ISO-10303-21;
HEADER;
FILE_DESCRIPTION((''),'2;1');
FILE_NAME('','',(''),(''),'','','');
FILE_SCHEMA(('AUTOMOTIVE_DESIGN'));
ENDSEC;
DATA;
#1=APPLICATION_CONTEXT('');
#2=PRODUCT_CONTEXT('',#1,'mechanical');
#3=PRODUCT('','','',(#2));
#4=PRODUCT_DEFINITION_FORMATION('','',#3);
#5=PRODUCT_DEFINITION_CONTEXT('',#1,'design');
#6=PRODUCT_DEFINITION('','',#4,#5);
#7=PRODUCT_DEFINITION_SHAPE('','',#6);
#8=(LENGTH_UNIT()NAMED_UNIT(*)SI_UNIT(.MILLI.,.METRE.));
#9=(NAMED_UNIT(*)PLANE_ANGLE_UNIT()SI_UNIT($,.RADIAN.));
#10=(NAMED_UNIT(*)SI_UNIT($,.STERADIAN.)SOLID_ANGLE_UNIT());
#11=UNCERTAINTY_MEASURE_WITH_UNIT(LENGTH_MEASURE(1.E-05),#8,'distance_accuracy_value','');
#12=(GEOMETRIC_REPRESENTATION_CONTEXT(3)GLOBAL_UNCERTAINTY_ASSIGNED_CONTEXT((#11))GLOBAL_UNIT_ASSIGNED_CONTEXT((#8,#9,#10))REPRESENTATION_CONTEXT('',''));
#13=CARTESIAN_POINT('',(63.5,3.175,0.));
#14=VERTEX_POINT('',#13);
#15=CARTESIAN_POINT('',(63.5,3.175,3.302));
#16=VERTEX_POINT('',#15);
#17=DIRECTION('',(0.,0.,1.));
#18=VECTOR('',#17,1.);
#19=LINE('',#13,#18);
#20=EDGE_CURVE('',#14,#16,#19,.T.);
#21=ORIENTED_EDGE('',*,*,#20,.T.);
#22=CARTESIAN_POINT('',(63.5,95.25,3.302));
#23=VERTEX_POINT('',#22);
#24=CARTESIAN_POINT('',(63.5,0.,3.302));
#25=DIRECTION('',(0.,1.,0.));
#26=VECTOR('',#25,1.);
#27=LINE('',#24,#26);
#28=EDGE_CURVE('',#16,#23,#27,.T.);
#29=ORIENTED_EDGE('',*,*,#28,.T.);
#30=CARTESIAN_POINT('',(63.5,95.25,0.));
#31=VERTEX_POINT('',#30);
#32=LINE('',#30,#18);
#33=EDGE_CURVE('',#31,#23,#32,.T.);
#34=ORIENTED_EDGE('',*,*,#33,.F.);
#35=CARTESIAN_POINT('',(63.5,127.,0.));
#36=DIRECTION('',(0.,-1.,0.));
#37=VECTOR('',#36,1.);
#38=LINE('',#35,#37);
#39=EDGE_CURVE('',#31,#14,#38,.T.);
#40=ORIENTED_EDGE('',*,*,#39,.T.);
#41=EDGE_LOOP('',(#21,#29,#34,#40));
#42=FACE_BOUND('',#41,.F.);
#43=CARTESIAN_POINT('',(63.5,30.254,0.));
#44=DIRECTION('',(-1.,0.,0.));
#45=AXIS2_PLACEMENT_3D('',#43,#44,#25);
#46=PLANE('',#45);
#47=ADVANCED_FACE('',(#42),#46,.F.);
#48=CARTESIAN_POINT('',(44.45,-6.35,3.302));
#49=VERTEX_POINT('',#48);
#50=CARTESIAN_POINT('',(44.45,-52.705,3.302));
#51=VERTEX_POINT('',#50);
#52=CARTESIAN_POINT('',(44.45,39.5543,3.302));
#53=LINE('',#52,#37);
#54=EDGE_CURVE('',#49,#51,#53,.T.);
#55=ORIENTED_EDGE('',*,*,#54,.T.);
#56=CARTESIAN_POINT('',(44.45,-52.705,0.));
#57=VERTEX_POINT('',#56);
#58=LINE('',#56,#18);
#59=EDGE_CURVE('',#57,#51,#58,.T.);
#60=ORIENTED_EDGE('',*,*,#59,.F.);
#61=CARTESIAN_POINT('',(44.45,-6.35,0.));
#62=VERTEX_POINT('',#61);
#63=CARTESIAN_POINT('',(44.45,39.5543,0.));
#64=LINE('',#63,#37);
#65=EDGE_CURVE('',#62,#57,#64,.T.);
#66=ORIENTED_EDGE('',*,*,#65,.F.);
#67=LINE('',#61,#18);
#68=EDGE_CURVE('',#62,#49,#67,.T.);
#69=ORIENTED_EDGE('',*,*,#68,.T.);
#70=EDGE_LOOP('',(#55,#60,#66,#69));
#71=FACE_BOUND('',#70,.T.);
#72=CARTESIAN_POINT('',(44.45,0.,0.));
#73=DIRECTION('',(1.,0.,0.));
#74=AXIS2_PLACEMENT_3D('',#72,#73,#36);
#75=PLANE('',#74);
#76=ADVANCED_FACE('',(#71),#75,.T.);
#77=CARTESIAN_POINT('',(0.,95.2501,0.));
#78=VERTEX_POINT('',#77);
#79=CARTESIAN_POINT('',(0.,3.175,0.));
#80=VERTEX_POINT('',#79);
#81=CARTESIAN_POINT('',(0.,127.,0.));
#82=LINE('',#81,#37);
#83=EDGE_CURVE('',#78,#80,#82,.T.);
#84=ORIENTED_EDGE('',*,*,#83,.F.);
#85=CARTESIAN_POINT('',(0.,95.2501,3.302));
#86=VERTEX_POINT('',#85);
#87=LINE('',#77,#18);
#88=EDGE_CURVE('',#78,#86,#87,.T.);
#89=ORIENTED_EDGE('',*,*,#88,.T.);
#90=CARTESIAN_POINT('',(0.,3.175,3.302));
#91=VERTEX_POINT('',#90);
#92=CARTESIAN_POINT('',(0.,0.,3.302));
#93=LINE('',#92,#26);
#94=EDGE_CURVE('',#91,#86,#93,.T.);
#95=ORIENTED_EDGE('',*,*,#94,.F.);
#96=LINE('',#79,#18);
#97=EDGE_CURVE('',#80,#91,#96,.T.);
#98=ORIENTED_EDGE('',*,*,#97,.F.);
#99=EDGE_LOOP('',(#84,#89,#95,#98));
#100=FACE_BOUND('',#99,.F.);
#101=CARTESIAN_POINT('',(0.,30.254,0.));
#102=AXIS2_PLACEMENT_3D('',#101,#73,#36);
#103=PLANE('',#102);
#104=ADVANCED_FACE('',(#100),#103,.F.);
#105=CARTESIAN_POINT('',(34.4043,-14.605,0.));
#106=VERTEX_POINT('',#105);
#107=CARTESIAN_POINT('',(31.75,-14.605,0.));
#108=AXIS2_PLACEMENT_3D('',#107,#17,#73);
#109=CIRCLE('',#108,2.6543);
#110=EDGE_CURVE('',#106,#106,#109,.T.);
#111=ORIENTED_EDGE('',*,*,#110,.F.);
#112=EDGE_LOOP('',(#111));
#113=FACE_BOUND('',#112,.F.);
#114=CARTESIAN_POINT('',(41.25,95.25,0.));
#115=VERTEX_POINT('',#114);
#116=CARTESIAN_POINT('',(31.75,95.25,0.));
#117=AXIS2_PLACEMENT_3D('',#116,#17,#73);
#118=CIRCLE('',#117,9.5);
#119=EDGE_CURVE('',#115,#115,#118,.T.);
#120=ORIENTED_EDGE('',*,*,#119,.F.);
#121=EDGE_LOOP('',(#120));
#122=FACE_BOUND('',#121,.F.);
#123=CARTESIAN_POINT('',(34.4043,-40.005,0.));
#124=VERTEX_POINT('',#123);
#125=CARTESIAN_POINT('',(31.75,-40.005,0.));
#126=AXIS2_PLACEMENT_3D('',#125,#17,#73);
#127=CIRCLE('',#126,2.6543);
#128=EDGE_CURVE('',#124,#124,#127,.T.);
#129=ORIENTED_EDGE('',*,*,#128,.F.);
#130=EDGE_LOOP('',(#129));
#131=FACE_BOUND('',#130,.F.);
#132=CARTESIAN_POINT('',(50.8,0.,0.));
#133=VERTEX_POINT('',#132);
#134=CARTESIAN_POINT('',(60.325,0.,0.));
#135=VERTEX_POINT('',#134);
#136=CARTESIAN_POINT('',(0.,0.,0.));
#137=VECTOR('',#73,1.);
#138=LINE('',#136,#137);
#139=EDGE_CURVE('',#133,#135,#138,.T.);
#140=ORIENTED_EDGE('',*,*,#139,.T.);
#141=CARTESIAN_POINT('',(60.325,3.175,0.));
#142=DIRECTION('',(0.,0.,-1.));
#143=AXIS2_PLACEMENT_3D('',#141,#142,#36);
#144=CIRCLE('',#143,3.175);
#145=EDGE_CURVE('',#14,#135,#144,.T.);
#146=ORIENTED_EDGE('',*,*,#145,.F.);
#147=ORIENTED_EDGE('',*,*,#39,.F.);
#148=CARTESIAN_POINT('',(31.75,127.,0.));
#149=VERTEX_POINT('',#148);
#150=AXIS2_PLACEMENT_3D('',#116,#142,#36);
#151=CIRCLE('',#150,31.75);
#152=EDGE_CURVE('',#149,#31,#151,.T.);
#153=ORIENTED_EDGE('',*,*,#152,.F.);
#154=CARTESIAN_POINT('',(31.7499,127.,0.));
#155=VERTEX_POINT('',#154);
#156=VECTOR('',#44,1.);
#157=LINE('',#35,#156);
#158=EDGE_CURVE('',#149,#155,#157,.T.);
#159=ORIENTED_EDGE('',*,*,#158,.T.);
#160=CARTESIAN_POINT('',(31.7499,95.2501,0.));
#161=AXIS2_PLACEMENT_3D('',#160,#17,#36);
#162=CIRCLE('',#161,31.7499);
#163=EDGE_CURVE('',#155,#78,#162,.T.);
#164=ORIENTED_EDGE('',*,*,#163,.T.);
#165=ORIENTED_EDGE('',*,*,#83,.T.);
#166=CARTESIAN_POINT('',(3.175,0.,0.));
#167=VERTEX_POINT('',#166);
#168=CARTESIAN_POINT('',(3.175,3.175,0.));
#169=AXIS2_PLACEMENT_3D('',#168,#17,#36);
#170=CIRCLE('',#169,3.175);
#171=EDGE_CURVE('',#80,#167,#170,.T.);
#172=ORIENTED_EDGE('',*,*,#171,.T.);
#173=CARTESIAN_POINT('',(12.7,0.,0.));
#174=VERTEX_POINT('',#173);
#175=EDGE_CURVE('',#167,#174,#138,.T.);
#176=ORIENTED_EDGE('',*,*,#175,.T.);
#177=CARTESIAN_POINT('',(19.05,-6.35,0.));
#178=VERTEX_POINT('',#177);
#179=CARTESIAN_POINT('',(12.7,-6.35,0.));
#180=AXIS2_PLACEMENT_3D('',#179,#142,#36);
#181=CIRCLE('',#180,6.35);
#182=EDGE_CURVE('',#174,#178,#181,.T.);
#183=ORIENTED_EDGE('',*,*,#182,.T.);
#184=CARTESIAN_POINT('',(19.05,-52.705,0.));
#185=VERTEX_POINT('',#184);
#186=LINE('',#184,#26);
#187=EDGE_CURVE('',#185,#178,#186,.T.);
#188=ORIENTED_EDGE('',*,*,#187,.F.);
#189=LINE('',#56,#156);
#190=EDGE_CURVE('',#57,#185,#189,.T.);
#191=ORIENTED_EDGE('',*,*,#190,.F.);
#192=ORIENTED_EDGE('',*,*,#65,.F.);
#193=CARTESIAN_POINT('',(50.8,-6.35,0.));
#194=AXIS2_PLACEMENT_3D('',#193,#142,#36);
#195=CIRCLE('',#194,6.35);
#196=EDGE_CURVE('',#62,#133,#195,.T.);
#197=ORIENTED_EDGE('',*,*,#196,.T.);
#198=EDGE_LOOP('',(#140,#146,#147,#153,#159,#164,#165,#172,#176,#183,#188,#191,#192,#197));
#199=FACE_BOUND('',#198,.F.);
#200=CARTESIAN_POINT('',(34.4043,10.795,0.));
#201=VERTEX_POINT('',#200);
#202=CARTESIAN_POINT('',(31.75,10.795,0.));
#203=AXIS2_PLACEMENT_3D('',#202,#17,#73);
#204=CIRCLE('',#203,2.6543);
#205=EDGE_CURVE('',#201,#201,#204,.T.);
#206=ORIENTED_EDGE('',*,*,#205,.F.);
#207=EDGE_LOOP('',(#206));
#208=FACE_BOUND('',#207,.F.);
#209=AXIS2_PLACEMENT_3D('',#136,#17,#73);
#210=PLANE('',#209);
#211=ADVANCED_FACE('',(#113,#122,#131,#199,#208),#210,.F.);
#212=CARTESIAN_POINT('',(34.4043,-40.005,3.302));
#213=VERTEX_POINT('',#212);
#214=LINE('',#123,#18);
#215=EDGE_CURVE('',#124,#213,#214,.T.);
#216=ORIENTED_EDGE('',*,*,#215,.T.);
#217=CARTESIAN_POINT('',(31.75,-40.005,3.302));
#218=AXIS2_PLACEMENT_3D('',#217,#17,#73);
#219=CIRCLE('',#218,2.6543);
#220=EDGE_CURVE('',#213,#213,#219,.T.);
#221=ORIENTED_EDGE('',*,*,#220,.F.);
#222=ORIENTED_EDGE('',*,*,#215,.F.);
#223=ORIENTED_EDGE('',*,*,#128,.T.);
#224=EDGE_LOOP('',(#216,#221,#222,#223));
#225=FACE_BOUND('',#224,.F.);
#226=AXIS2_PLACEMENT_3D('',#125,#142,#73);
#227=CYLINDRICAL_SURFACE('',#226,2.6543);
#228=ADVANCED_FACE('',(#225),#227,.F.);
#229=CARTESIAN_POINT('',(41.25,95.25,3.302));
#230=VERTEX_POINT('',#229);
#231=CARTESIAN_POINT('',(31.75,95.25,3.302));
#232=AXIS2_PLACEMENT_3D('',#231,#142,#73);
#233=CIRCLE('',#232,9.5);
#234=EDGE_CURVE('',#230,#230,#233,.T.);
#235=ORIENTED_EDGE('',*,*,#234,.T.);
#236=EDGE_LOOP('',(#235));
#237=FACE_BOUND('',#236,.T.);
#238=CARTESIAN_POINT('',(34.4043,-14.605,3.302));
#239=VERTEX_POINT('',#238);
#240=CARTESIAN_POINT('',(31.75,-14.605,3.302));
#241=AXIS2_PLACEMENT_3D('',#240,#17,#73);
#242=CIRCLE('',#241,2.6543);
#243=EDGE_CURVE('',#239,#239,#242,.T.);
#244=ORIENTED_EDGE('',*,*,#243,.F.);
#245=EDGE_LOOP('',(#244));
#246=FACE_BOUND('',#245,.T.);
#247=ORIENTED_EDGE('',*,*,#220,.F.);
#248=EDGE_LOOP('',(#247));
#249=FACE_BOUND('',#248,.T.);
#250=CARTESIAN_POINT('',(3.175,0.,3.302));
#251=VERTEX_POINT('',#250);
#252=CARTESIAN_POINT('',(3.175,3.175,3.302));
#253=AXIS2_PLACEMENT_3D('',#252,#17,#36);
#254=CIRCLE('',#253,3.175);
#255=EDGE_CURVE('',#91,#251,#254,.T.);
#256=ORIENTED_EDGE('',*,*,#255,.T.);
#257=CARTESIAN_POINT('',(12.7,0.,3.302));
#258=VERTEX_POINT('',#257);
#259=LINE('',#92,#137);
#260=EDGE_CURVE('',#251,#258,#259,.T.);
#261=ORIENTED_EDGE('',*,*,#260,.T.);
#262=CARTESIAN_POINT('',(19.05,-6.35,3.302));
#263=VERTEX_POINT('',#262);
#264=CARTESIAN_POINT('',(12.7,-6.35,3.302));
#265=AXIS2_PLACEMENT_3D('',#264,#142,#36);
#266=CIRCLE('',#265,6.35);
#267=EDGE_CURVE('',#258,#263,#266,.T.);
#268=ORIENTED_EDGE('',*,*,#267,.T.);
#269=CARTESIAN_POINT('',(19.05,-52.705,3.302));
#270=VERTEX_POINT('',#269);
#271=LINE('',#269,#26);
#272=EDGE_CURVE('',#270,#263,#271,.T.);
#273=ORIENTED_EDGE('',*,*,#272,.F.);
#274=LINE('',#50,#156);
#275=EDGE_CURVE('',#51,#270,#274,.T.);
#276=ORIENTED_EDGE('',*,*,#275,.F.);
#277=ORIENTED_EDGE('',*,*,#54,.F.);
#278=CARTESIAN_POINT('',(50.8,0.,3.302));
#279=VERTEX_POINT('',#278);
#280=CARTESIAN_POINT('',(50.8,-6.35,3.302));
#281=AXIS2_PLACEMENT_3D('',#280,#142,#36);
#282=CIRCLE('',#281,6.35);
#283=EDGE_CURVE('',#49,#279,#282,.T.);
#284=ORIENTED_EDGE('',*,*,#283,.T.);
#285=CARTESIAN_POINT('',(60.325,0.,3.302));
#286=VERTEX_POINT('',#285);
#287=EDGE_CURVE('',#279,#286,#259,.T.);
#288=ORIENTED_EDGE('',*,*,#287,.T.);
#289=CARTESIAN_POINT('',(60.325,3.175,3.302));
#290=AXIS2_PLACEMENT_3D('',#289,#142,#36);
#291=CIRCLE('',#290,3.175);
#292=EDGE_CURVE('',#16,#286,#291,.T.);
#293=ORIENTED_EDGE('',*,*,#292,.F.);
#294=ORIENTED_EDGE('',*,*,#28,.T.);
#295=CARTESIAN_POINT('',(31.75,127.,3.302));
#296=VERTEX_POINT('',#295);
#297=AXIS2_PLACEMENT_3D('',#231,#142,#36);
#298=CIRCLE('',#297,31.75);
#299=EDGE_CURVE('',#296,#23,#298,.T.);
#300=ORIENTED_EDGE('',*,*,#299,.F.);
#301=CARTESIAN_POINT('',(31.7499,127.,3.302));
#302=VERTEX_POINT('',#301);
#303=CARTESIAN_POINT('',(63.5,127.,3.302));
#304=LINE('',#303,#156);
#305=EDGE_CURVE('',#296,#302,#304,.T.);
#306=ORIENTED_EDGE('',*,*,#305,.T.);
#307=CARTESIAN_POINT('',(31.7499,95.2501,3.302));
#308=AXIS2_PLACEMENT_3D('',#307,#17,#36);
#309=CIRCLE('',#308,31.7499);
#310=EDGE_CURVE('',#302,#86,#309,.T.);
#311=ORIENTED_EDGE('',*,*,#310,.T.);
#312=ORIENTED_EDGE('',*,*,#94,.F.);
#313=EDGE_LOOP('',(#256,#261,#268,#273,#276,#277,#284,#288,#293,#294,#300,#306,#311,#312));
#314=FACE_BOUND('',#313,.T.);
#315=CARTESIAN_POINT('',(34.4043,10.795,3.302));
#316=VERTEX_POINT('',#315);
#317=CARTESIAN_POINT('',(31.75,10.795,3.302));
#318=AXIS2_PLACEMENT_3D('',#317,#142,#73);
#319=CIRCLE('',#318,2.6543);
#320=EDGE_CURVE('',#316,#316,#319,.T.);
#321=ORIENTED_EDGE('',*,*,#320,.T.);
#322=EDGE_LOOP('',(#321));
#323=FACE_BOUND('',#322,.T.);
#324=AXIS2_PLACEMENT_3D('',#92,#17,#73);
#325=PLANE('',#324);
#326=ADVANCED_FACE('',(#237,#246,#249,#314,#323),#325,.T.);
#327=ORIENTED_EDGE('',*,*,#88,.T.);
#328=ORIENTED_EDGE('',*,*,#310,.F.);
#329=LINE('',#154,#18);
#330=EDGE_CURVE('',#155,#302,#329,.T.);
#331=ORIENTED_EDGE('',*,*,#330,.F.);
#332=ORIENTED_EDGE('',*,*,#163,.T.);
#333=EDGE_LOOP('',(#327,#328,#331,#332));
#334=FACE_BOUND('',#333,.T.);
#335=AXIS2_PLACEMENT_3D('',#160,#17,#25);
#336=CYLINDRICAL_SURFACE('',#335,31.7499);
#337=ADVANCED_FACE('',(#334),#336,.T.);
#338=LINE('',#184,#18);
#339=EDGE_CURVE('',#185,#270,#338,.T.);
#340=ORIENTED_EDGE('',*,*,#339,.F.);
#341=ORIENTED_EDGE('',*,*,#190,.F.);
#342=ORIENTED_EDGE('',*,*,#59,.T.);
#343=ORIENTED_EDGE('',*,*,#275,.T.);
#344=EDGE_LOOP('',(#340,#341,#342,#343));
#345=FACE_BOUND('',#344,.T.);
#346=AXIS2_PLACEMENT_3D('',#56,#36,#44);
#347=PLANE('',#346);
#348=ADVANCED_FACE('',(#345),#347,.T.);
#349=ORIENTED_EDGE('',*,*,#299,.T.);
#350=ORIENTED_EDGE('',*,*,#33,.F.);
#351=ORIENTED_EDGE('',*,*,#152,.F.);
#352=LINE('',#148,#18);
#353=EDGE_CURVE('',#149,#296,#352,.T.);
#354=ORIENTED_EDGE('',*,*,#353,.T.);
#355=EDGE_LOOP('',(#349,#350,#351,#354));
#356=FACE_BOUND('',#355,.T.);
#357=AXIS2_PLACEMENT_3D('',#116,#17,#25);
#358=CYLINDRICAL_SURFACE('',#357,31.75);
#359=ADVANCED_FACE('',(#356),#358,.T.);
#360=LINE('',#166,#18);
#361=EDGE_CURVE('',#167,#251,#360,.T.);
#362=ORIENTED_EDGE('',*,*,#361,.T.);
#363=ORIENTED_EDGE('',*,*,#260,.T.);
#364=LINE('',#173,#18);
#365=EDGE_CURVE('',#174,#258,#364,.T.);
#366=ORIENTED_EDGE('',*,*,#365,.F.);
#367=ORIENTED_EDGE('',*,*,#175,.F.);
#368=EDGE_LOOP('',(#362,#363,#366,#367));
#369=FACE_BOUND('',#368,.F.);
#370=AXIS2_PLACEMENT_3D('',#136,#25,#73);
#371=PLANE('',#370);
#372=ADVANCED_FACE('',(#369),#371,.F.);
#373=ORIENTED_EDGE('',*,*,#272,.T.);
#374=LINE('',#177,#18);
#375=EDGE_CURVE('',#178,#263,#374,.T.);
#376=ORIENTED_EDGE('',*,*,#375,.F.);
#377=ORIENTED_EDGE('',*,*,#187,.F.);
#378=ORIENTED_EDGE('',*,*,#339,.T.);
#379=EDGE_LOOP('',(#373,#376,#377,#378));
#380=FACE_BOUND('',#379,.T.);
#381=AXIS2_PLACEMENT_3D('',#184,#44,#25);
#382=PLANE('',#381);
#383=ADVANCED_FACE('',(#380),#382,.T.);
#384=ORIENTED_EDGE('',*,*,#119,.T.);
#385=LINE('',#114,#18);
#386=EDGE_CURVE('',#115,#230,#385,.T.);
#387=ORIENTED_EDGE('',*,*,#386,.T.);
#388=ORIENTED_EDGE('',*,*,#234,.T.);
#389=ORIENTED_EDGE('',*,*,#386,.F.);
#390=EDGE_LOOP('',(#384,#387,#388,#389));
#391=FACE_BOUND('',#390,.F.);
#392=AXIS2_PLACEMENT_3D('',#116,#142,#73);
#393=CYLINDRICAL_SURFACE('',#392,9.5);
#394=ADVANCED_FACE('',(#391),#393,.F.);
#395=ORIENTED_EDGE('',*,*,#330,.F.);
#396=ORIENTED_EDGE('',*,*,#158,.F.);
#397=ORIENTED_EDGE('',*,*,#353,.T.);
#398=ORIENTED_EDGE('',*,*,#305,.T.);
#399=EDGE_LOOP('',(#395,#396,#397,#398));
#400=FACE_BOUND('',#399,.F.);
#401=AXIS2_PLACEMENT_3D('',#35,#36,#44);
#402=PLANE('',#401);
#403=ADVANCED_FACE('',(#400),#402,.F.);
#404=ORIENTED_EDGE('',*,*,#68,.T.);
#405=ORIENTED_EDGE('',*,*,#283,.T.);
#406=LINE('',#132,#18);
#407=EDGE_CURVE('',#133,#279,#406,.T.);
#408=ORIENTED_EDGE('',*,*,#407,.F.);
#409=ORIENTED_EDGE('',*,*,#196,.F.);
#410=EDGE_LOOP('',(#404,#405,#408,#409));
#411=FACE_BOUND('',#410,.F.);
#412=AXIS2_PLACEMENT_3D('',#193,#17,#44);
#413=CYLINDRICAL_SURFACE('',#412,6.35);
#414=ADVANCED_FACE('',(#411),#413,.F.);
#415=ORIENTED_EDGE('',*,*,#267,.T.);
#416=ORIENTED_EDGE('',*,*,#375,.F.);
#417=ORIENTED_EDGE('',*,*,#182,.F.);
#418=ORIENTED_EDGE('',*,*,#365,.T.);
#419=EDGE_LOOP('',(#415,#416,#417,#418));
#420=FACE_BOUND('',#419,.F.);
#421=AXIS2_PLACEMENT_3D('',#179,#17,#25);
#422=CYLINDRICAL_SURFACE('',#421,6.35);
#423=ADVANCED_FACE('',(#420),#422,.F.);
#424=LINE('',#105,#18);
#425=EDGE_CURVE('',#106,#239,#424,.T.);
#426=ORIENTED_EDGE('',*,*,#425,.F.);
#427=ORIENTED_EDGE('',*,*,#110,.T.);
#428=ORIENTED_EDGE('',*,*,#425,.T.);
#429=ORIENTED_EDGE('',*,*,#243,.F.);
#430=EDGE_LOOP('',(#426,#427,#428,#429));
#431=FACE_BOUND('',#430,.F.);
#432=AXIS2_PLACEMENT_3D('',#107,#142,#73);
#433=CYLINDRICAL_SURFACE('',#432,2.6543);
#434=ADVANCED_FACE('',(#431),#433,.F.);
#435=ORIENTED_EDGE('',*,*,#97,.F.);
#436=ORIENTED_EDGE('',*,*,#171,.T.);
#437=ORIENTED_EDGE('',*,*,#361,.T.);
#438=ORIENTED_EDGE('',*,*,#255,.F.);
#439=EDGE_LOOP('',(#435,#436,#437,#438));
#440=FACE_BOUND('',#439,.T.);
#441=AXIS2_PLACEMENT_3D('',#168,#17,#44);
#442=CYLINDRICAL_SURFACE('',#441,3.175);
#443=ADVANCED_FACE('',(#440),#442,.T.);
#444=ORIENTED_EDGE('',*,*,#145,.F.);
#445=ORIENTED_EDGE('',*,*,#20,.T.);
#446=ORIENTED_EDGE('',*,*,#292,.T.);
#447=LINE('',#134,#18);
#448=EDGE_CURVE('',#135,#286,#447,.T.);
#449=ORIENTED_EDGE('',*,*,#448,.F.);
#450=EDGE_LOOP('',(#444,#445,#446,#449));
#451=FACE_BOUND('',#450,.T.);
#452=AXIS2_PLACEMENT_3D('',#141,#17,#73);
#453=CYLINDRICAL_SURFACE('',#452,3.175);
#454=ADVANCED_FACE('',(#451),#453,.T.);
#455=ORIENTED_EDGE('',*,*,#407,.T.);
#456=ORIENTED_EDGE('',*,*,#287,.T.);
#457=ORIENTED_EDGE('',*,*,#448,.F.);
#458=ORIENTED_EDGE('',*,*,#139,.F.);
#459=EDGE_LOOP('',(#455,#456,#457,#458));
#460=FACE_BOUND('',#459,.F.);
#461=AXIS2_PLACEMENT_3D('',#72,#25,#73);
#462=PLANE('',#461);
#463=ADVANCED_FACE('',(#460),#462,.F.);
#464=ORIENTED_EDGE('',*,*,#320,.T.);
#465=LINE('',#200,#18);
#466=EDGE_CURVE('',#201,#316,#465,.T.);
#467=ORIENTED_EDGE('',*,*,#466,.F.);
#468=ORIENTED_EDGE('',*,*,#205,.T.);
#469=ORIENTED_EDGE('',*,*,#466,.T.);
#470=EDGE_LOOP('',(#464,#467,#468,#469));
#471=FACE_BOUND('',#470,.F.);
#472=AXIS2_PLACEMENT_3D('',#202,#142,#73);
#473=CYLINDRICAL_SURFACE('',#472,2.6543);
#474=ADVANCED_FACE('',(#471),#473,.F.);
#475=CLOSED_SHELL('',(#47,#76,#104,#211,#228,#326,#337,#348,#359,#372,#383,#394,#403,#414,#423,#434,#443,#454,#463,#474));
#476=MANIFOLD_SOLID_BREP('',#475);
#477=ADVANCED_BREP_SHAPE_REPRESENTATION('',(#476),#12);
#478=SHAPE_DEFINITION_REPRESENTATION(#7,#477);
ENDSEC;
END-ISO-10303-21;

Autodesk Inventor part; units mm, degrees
ref_plane "YZ Plane" through (0, 0, 0) normal (1, 0, 0) x (0, 1, 0)
ref_plane "XZ Plane" through (0, 0, 0) normal (0, 1, 0) x (-1, 0, 0)
ref_plane "XY Plane" through (0, 0, 0) normal (0, 0, 1) x (1, 0, 0)
sketch "Sketch1" plane through (0, 0, 0) normal (0, 0, 1) x (1, 0, 0)
  line L0 (0, 0) -> (63.5, 0)
  line L1 (63.5, 0) -> (63.5, 127)
  line L2 (63.5, 127) -> (0, 127)
  line L3 (0, 127) -> (0, 0)
  circle A0 centre (31.75, 95.25) radius 9.5
  circle A1 centre (31.75, 10.795) radius 2.6543
  circle A2 centre (31.75, -14.605) radius 2.6543
  line L4 (31.75, 115.6989) -> (31.75, 0)
  circle A3 centre (31.75, -40.005) radius 2.6543
  line L5 (44.45, 39.5543) -> (44.45, -52.705)
  line L6 (44.45, -52.705) -> (19.05, -52.705)
  line L7 (19.05, -52.705) -> (19.05, 39.5543)
  line L8 (44.45, 39.5543) -> (19.05, 39.5543)
  line L9 (0, 30.254) -> (63.5, 30.254)
  point P0 (44.45, 0)
  point P1 (19.05, 0)
  point P2 (31.75, -52.705)
  dimension "d0" = 63.5
  dimension "d1" = 127
  dimension "d2" = 19
  dimension "d3" = 5.3086
  dimension "d4" = 5.3086
  dimension "d5" = 31.75
  dimension "d6" = 116.205
  dimension "d14" = 25.4
  dimension "d15" = 25.4
  dimension "d17" = 25.4
  dimension "d20" = 39.5543
  dimension "d21" = 12.7
extrude "Extrusion1" add sketch "Sketch1" along normal blind 3.302 contours L3 L9 L7 L0 | L7 L9 L4 A1 L0 | L0 L5 L6 L7 | L3 L2 L1 L9 L5 L8 L7 | L4 A1 L9 L5 L0 | L7 L8 L4 L9 | L5 L9 L1 L0 | L4 L8 L5 L9
fillet "Fillet1" radius 31.75 1 edges at (63.5, 127, 1.651)
fillet "Fillet2" radius 31.75 1 edges at (0, 127, 1.651)
fillet "Fillet3" radius 3.175 1 edges at (63.5, 0, 1.651)
fillet "Fillet4" radius 3.175 1 edges at (0, 0, 1.651)
fillet "Fillet5" radius 6.35 2 edges at (19.05, 0, 1.651) (44.45, 0, 1.651)
properties part number "Wrist plate"
